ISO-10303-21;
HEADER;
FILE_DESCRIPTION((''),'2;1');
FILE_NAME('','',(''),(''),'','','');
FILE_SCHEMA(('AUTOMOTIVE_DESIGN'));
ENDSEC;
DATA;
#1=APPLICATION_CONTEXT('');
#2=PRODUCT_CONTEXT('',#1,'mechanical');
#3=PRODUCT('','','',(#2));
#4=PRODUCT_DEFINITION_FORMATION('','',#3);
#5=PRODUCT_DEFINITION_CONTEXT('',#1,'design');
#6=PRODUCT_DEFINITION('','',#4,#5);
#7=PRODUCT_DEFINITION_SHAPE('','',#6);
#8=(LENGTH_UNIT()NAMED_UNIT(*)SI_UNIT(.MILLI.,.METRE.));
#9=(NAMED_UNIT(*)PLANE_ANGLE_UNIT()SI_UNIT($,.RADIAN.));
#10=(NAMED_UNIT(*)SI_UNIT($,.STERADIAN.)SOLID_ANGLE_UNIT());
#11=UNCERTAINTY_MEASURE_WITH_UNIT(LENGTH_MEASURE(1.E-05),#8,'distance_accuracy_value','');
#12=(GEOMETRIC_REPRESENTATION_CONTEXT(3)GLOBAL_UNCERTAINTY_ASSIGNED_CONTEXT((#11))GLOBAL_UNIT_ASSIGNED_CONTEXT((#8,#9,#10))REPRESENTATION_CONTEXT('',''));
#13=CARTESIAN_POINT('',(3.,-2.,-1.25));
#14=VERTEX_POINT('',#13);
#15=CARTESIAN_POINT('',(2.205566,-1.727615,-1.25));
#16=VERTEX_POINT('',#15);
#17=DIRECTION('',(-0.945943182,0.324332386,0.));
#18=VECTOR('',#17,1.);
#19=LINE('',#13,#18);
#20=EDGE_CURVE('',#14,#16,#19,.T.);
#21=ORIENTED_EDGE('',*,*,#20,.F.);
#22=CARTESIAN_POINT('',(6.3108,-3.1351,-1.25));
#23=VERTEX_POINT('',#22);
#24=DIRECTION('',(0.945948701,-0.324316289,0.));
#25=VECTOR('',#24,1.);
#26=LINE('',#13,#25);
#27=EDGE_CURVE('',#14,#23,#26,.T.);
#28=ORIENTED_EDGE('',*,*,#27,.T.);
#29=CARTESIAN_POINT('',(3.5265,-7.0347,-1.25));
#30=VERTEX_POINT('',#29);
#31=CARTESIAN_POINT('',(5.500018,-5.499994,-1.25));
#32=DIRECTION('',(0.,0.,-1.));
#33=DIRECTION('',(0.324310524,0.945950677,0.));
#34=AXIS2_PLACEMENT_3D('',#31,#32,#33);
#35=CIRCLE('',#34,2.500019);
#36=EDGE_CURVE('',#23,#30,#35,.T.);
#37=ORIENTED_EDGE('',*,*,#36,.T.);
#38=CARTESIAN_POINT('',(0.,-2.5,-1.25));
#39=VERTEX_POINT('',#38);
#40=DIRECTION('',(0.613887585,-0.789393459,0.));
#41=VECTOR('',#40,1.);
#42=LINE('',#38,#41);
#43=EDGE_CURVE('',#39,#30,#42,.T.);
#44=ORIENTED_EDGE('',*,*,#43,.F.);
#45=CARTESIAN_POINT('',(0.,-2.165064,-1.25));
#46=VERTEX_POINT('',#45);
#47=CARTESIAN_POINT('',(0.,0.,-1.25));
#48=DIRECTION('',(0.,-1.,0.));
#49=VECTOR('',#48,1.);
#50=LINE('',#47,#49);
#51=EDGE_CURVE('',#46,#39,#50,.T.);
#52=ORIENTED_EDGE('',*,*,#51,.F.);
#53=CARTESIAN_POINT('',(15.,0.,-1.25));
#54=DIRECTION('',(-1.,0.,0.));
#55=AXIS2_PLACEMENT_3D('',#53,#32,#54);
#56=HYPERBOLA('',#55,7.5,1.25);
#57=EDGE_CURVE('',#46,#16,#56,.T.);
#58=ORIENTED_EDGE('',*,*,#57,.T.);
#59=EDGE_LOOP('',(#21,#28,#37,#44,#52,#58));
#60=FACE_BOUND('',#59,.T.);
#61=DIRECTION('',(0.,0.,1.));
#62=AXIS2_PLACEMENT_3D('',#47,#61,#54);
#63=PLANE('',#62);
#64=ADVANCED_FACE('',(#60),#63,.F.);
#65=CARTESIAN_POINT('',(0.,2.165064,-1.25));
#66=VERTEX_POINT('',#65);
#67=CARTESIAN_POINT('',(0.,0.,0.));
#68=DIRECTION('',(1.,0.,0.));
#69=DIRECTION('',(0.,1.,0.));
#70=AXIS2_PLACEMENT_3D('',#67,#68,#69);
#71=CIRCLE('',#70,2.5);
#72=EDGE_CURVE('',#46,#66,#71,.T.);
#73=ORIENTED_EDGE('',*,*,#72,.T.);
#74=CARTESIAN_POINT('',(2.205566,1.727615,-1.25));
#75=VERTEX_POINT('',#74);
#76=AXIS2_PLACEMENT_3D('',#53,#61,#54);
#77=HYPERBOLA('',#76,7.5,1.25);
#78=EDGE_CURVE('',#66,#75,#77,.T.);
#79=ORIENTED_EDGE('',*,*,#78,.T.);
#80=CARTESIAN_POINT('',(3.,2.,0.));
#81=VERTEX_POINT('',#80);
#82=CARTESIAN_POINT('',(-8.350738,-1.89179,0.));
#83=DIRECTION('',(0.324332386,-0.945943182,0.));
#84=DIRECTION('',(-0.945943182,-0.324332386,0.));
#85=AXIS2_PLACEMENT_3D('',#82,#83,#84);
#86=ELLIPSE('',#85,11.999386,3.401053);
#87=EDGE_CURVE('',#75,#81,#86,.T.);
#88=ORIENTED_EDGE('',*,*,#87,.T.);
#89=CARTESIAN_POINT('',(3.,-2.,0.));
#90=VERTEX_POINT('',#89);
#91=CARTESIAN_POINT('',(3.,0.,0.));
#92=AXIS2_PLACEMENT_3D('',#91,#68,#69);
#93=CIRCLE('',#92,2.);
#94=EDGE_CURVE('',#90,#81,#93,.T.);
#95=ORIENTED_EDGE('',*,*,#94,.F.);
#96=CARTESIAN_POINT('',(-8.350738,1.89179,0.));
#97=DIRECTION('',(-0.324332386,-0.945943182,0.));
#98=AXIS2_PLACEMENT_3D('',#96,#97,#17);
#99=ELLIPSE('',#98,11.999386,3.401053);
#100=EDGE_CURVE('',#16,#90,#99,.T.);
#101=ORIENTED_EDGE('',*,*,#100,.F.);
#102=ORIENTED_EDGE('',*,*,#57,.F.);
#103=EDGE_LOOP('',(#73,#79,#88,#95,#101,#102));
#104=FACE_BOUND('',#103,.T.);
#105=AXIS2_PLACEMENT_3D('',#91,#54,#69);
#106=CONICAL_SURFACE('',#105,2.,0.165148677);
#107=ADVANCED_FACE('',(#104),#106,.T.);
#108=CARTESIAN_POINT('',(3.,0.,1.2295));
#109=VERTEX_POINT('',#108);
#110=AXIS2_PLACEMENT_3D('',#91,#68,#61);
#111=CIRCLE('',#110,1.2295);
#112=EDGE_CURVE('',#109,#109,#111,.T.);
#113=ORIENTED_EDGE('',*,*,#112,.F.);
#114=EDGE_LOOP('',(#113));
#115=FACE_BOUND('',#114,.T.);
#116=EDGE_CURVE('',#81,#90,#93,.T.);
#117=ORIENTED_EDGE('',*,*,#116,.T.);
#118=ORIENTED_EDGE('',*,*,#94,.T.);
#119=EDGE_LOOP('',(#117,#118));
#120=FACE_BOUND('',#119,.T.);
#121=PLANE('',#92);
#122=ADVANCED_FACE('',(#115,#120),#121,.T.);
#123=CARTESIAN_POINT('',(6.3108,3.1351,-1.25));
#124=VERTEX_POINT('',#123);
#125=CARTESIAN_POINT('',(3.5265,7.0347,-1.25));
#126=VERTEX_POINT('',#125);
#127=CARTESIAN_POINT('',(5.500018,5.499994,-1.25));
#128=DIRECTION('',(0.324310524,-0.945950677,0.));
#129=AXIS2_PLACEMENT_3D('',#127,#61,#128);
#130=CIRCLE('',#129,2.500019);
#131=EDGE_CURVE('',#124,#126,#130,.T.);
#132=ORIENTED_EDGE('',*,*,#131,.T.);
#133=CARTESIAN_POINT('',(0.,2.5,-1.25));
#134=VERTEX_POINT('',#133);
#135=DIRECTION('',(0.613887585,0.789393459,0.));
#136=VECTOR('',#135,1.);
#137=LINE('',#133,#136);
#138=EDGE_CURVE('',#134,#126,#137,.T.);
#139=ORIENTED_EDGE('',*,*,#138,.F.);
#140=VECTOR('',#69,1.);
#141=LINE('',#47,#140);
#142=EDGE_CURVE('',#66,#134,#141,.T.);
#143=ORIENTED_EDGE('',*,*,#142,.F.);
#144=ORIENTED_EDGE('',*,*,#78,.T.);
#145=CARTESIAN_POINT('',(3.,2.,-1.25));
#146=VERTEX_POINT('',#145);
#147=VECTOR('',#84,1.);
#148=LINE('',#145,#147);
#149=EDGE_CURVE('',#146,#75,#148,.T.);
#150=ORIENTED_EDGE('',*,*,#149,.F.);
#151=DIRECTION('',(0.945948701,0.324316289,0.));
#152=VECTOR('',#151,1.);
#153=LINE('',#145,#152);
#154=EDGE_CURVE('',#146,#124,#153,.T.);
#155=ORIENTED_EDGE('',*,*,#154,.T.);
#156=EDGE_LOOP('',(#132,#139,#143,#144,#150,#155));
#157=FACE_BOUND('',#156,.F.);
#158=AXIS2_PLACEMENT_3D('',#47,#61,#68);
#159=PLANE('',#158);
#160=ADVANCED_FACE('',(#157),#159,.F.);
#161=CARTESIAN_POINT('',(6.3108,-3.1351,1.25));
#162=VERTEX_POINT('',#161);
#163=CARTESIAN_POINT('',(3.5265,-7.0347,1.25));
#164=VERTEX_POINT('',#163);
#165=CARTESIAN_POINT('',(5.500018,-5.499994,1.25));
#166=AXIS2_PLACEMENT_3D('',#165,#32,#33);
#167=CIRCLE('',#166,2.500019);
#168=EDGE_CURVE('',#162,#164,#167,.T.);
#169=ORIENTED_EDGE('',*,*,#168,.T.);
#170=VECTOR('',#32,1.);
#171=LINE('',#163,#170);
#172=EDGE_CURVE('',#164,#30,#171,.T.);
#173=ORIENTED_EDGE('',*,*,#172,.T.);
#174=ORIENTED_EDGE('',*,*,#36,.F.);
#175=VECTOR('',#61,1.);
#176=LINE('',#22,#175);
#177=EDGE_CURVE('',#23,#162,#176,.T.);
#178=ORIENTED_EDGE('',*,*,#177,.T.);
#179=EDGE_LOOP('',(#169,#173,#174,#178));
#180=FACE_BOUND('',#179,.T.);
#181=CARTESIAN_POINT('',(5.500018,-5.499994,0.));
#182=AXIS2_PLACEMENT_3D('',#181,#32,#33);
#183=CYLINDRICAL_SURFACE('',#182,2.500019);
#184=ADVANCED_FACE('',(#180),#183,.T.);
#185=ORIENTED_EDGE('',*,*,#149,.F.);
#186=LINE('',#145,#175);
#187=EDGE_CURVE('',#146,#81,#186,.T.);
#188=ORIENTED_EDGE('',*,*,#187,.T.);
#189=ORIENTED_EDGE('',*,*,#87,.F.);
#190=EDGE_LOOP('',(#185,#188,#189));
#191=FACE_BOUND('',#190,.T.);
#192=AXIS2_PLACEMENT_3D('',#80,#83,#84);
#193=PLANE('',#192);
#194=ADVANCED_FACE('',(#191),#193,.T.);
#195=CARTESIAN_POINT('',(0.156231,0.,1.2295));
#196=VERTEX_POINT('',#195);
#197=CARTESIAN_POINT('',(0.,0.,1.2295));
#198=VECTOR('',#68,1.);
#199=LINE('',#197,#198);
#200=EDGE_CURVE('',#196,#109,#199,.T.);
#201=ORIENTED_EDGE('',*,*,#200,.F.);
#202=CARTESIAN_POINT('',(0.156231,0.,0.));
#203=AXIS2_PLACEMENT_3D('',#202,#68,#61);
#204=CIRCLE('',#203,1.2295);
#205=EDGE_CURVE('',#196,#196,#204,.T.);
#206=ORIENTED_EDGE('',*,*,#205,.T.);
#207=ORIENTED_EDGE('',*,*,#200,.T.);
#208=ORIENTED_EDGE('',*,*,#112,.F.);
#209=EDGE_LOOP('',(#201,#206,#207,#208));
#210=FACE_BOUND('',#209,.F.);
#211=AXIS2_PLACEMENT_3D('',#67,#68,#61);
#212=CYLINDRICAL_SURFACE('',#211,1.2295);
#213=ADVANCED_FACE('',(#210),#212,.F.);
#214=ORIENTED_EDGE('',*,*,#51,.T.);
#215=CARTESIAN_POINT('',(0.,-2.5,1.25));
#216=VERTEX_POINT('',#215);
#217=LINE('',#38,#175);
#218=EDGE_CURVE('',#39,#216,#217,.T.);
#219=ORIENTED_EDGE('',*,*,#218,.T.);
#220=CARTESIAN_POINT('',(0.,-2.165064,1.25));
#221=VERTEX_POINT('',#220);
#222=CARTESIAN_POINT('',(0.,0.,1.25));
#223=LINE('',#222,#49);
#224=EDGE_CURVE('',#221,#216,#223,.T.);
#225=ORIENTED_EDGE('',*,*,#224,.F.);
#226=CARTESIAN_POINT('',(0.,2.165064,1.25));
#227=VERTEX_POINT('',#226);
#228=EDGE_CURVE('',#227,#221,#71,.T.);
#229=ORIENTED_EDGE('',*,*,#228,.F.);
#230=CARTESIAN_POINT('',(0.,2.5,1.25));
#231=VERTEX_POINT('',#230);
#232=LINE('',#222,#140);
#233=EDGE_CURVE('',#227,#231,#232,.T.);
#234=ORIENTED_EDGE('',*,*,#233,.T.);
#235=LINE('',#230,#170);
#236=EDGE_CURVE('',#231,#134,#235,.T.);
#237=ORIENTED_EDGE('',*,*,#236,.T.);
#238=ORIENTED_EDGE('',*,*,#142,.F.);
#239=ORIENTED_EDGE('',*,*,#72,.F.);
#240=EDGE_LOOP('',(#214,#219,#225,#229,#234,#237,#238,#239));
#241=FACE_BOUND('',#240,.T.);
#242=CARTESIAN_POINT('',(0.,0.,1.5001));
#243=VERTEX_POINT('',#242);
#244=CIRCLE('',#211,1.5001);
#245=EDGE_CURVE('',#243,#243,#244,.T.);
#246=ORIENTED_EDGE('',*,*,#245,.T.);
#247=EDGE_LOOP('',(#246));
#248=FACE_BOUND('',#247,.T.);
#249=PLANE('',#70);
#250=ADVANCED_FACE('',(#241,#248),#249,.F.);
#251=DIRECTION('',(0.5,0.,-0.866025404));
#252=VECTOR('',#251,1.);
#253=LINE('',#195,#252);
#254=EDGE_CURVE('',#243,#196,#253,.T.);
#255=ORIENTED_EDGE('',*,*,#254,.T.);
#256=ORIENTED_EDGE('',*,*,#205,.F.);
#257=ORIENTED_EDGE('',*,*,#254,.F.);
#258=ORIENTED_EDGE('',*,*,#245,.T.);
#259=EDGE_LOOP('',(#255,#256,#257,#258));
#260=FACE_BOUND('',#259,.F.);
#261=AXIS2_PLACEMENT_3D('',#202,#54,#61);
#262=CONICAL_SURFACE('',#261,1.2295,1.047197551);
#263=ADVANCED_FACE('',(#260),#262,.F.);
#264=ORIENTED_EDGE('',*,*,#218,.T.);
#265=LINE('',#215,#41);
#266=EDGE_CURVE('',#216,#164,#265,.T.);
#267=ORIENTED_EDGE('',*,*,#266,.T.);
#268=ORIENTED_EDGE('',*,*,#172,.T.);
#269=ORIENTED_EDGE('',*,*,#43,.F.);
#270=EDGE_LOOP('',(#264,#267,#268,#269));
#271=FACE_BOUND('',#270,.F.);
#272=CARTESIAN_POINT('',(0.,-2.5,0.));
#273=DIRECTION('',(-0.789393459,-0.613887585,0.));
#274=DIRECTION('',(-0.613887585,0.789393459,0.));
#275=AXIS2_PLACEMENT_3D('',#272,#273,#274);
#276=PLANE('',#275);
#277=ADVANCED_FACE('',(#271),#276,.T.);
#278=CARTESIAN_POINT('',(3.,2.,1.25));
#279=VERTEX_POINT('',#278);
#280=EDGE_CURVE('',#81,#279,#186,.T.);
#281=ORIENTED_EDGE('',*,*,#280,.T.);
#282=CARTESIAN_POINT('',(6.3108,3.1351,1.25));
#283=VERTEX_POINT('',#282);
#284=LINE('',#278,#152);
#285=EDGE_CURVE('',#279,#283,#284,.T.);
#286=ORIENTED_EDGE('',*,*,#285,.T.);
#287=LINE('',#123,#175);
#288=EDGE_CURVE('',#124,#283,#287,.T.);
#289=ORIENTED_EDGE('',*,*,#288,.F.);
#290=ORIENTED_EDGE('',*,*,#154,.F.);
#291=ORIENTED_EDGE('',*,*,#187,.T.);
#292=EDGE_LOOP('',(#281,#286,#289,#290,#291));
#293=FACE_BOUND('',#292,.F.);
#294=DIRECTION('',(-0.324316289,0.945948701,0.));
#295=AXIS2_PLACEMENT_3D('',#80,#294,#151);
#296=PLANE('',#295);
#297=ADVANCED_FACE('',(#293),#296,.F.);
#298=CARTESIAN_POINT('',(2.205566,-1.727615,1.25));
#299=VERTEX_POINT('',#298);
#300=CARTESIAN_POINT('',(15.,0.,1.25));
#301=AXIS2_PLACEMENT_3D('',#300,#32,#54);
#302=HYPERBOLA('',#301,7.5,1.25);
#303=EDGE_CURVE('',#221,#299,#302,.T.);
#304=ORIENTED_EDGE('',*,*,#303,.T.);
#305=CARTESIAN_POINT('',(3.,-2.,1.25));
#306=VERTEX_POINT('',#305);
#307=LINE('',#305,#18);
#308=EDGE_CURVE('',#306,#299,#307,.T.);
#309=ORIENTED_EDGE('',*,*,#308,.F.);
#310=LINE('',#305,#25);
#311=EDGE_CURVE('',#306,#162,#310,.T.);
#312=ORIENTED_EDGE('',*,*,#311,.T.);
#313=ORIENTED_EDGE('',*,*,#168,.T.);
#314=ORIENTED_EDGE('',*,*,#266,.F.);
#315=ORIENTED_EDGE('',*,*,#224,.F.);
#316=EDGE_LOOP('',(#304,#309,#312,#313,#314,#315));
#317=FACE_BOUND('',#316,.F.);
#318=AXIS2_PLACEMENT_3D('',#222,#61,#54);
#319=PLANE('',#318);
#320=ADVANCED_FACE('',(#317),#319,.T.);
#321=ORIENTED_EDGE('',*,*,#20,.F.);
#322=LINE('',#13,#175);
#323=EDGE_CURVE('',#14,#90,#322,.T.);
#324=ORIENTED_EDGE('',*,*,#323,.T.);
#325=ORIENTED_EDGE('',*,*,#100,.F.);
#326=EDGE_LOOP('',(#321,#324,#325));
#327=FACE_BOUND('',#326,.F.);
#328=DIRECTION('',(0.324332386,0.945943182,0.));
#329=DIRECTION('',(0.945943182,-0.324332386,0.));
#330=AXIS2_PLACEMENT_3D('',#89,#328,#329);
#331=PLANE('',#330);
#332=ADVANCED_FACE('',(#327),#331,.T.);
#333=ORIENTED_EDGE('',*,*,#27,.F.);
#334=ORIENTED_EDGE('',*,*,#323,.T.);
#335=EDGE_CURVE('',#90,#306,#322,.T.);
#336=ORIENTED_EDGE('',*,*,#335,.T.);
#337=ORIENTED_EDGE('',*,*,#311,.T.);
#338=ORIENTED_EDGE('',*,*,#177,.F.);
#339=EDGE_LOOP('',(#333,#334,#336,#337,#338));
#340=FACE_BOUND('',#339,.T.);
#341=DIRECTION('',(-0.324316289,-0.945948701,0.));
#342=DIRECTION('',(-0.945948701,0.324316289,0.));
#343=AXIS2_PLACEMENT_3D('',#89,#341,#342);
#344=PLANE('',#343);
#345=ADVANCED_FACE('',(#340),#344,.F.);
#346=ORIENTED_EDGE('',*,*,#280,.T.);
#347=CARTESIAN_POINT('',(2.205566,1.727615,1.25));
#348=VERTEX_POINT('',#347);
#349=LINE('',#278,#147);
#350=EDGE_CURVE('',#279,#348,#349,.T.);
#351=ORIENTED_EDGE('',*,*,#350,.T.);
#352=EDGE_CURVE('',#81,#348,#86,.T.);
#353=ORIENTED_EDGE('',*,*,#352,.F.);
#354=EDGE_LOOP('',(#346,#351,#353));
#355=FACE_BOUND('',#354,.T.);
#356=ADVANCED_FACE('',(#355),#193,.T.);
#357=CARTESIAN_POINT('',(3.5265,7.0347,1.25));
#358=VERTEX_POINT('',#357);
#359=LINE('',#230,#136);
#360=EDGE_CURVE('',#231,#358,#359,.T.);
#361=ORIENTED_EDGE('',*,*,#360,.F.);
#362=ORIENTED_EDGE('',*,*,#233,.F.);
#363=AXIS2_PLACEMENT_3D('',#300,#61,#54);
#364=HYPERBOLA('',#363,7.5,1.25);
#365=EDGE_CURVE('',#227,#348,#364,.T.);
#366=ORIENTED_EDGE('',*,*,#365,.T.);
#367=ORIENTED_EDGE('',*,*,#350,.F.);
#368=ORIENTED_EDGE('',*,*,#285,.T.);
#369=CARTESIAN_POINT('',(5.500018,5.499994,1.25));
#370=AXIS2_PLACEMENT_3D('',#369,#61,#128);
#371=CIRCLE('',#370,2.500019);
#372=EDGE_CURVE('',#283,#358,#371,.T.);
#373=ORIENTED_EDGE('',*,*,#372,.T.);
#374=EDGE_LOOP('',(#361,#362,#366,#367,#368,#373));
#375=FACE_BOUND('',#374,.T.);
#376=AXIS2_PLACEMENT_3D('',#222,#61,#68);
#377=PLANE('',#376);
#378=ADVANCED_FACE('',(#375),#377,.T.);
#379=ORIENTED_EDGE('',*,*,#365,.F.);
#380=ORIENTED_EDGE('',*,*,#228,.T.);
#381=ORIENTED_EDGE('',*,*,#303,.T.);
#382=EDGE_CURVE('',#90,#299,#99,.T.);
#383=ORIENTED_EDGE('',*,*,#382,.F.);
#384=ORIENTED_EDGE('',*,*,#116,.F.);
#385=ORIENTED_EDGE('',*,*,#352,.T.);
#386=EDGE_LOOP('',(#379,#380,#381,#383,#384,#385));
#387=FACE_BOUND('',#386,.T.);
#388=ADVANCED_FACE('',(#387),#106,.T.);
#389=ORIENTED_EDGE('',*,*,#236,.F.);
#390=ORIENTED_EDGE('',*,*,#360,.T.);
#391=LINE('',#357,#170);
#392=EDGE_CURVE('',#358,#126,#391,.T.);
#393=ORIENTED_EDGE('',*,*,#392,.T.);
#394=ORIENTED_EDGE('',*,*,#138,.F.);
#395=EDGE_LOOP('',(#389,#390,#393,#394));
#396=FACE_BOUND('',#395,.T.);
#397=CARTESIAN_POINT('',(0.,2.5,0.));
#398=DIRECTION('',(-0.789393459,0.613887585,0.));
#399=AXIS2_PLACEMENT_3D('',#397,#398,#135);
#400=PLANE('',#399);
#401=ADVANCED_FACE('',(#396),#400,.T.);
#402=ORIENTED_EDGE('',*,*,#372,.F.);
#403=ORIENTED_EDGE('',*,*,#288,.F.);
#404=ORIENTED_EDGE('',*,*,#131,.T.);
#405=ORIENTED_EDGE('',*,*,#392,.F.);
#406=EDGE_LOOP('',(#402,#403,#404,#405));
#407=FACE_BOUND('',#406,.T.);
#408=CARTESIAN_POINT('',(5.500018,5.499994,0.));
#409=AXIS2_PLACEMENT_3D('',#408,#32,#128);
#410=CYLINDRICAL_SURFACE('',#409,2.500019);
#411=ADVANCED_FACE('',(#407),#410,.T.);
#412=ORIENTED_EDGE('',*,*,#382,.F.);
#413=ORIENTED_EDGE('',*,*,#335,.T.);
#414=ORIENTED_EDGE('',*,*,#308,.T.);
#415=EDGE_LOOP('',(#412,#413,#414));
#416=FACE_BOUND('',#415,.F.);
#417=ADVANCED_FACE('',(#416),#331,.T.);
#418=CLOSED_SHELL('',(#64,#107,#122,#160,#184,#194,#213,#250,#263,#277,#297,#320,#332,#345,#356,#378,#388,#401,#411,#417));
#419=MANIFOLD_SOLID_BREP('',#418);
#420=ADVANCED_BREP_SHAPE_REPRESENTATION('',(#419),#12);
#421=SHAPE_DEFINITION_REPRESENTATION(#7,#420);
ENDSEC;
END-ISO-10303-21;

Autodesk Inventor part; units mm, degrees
ref_plane "YZ Plane" through (0, 0, 0) normal (1, 0, 0) x (0, 1, 0)
ref_plane "XZ Plane" through (0, 0, 0) normal (0, 1, 0) x (-1, 0, 0)
sketch "Szkic1" plane through (0, 0, 0) normal (0, 0, 1) x (1, 0, 0)
  line L0 (0, 0) -> (3, 0)
  line L1 (0, 0) -> (0, 2.5)
  line L2 (3, 2) -> (3, 0)
  line L3 (0, 2.5) -> (3.5265, 7.0347)
  line L4 (3, 2) -> (6.3108, 3.1351)
  arc A0 (6.3108, 3.1351) -> (3.5265, 7.0347) centre (5.5, 5.5) ccw
  line L5 (3, 2) -> (0, 2.5)
  line L6 (3, 2) -> (0, 0.9714)
  dimension "d0" = 4
  dimension "d1" = 5.5
  dimension "d2" = 5.5
  dimension "d3" = 2.5
  dimension "d4" = 3
  dimension "d5" = 5
revolve "Bryła" add sketch "Szkic1" angle 360 about axis through (0, 0, 0) along (1, 0, 0) contours L1 L6 L2 L0 | L1 L5 L6
extrude "Skrzydło1" add sketch "Szkic1" along normal mid plane 2.5 contours L1 L5 L6 | L5 L3 A0 L4
fillet "Zaokrąglenie1" [suppressed]
mirror "Skrzydło2" about plane through (0, 0, 0) normal (0, 1, 0) of "Skrzydło1"
sketch "Szkic2" plane through (0, 0, 0) normal (1, 0, 0) x (0, 1, 0)
  line L0 (0, -14) -> (0, 14) projected
  line L1 (-14, 0) -> (14, 0) projected
  point P0 (0, 0)
hole "Gwint" at (0, 0, 0) direction (1, 0, 0) diameter 2.459 end through all thread size "M3x0.5" class "6H" standard "ISO Metric profile"
chamfer "Faza1" distance 0.2706 angle 30 1 edges at (0, 0, -1.2295) measured on face at (0, -2.0735, 0.0494)
ref_plane "Work Plane1" through (18.5742, 0, 0) normal (0, 0, -1) x (1, 0, 0)
equation "\"d0\" = KOD2"
equation "\"d1\" = KOH1 - RR"
equation "\"d2\" = 0.5 * E0 - RR"
equation "\"d3\" = RR"
equation "\"d4\" = KOH"
equation "\"d5\" = KOD"
equation "\"d6\" = SW"
equation "\"d8\" = 0.333333 * SW"
equation "\"d9\" = -0.5 * GD1 + 0.5 * NND"
equation "\"d109\" = -0.5 * GD1 + 0.5 * NND"
equation "\"NND\" = 3"
equation "\"KOH\" = 3"
equation "\"KOH1\" = 8"
equation "\"SW\" = 2.5"
equation "\"KOD\" = 5"
equation "\"KOD2\" = 4"
equation "\"RR\" = 2.5"
equation "\"E0\" = 16"
equation "\"GUL\" = 0.541266 * PTC"
equation "\"PTC\" = 0.5"
equation "\"THREADDIA\" = 3"
equation "\"TOA\" = 30deg"
equation "\"RR2\" = 1.6"
equation "\"SW1\" = 3"
equation "\"GAL\" = 0.541266 * PTC"
equation "\"GD1\" = 2.458734"
properties part number "KS B 1014 - M 3" material "Stal, miękka"
